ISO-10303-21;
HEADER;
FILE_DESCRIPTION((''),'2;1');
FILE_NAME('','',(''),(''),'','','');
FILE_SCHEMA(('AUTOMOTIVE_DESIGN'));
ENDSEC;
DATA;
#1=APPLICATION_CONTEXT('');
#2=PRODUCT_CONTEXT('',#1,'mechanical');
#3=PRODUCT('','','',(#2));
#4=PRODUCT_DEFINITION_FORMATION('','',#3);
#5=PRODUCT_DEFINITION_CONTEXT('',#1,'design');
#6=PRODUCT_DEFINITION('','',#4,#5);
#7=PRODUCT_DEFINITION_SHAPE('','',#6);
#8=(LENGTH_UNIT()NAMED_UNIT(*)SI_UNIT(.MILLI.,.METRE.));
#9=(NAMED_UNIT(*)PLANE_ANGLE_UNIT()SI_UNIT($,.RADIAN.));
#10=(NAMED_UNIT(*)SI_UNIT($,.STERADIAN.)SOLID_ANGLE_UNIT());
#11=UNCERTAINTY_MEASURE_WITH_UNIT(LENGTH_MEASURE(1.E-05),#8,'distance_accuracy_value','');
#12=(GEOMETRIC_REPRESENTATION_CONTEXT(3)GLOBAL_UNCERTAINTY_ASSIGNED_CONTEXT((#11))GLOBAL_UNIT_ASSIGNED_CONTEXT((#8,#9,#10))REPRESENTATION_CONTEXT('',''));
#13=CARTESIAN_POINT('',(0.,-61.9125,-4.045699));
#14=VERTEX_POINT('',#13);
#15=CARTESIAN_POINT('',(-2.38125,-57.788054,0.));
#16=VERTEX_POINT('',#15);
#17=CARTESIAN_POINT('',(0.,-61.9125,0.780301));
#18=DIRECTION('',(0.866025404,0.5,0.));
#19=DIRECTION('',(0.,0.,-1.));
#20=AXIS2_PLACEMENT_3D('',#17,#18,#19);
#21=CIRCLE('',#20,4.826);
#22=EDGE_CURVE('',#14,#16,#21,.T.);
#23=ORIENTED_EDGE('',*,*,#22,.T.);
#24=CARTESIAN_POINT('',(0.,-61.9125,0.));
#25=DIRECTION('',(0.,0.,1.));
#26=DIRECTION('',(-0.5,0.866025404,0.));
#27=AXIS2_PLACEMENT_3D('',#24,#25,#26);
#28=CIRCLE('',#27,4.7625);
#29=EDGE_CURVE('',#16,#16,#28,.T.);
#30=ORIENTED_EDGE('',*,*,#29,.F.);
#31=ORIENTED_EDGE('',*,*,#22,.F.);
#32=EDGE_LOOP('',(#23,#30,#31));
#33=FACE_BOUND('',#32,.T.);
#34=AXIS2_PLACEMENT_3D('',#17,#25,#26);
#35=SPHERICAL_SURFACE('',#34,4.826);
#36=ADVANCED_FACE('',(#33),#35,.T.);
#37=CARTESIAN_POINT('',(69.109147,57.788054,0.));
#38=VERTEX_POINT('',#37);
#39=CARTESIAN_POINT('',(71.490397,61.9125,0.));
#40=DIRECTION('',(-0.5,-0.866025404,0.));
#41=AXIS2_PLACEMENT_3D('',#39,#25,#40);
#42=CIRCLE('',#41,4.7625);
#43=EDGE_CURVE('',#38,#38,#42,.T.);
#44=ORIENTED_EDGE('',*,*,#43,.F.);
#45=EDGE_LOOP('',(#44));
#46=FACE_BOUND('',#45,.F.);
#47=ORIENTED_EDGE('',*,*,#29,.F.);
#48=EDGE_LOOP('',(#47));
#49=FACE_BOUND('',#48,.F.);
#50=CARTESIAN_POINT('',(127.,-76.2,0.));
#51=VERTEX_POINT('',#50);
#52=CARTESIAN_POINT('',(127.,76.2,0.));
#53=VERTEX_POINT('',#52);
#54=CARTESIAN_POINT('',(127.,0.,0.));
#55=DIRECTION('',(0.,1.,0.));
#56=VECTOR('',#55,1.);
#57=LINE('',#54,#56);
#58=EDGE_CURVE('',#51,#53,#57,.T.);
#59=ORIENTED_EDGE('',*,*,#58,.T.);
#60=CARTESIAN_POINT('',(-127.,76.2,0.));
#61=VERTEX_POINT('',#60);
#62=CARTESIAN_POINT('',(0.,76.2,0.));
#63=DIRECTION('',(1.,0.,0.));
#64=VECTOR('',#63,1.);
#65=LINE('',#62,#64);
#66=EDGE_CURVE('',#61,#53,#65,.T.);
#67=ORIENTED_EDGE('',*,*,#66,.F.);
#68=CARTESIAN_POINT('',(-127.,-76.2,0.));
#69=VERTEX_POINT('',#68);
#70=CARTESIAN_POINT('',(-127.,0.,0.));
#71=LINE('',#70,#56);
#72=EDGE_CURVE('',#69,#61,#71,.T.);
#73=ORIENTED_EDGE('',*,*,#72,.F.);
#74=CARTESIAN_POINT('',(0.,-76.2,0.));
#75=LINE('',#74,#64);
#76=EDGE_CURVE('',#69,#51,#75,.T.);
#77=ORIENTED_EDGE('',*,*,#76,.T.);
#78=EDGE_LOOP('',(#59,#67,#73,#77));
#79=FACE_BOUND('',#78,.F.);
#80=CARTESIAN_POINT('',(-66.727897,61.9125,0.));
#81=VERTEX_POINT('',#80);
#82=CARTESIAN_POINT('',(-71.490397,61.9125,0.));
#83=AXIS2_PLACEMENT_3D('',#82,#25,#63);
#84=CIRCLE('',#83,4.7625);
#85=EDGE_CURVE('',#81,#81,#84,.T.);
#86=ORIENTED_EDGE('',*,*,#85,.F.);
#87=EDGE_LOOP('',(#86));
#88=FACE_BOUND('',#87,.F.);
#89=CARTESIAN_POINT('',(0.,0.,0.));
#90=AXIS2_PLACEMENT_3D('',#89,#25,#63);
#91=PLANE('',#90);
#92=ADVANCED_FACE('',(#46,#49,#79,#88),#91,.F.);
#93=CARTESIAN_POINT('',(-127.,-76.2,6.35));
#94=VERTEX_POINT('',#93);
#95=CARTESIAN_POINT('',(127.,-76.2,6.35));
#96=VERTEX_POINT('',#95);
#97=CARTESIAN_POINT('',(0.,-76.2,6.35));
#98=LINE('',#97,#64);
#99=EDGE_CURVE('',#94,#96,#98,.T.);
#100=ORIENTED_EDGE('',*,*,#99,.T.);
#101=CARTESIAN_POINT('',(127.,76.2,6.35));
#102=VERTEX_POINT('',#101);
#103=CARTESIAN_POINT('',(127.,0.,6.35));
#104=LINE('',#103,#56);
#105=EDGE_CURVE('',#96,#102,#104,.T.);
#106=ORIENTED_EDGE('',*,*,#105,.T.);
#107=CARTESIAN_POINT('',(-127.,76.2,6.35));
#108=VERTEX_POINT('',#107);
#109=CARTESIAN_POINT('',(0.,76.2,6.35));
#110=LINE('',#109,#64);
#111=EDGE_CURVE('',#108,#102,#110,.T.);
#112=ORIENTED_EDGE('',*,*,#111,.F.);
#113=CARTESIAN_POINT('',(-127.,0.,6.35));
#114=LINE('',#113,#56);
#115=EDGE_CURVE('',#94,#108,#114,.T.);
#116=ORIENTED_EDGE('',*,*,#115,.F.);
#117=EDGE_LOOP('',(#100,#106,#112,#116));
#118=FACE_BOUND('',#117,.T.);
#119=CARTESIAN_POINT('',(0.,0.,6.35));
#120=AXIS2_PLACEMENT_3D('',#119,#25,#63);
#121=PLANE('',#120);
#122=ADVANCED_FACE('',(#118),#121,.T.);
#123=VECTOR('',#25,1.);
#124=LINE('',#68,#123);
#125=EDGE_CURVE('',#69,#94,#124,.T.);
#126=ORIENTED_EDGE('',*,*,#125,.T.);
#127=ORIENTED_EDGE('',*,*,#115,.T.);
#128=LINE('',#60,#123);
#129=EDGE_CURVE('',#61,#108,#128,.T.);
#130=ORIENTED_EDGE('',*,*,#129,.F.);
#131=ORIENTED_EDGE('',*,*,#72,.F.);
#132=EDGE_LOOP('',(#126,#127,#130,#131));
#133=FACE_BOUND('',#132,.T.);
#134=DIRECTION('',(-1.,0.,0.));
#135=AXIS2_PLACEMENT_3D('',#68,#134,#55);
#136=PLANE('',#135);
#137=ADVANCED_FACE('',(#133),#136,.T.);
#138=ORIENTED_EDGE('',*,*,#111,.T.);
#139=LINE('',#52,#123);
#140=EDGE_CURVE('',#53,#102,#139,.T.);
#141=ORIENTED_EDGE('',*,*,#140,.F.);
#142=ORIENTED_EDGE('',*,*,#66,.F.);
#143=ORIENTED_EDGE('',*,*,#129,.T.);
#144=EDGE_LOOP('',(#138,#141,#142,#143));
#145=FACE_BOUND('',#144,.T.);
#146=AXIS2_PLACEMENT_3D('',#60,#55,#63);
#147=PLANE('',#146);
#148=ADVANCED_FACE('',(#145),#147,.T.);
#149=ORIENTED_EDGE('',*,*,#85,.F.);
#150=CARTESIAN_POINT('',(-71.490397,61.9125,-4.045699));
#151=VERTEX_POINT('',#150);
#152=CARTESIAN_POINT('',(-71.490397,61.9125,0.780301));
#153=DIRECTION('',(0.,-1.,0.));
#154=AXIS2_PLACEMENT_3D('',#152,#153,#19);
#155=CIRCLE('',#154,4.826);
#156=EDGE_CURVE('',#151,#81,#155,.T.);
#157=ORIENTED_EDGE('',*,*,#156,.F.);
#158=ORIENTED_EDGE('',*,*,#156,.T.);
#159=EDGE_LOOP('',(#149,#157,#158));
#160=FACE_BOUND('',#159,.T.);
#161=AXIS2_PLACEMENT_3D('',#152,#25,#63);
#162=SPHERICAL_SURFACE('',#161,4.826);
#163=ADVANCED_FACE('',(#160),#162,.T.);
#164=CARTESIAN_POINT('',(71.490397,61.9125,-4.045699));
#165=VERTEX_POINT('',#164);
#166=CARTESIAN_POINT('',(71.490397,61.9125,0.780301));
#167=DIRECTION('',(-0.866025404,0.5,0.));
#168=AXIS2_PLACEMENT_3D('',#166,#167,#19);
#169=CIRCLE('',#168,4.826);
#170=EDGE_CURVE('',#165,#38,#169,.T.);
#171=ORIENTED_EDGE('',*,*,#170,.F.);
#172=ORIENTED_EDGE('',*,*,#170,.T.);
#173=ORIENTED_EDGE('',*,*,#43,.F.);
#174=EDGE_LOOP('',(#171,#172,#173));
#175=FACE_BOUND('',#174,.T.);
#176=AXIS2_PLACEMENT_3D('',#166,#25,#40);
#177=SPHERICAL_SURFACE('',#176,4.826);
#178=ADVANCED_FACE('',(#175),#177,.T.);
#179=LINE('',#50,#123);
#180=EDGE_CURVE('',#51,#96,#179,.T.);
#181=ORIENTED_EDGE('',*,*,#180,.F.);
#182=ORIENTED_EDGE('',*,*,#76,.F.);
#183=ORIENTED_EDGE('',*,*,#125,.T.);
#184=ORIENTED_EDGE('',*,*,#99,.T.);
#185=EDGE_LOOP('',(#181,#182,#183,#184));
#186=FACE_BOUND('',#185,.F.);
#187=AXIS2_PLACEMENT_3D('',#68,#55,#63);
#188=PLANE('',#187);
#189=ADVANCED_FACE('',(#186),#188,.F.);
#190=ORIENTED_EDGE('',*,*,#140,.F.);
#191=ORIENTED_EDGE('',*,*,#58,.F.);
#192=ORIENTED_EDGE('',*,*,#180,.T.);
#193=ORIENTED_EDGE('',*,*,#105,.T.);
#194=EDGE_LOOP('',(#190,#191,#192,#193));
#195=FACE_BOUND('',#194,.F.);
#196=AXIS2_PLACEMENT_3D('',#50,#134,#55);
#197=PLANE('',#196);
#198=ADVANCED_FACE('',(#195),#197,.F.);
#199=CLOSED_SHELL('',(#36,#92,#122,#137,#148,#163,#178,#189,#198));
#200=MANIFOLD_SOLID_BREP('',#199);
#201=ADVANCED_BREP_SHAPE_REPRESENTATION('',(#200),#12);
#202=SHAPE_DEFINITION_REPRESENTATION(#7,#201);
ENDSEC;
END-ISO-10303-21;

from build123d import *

# Parameters (mm, degrees)
F0_W            = 254
F0_H            = 152.4
F1_DEPTH        = 6.35
F5_COPIES_COUNT = 3


# Not quite as in the source:
# - a pattern or mirror of a feature is missing from the dataset's text; its kind, count and spacing are read off the source's solid


with BuildPart() as f1:
    # F0 (on Top) → F1 (new body)
    with BuildSketch(Plane.XY):
        Rectangle(F0_W, F0_H)
    extrude(amount=F1_DEPTH)

    # F4 (on face) → F5 (revolve)
    with BuildSketch(Plane.XZ.offset(-61.9125)):
        with BuildLine():
            Line((-71.4903970824, 0.7803010637), (-71.4903970824, -4.0456989363))
            ThreePointArc((-71.4903970824, -4.0456989363), (-68.0778997564, -2.6321962623), (-66.6643970824, 0.7803010637))
            Line((-66.6643970824, 0.7803010637), (-71.4903970824, 0.7803010637))
        make_face()
    f5 = revolve(axis=Axis((-71.4903970824, 61.9125, -1.6326989363), (0, 0, 1)))

    # F5_copies: F5 ×3 about axis
    f5_copies_axis = Axis((0, 20.6375, 0), (0, 0, 1))
    for i in range(1, F5_COPIES_COUNT):
        add(f5.rotate(f5_copies_axis, i * 360 / F5_COPIES_COUNT))


solid = f1.part
